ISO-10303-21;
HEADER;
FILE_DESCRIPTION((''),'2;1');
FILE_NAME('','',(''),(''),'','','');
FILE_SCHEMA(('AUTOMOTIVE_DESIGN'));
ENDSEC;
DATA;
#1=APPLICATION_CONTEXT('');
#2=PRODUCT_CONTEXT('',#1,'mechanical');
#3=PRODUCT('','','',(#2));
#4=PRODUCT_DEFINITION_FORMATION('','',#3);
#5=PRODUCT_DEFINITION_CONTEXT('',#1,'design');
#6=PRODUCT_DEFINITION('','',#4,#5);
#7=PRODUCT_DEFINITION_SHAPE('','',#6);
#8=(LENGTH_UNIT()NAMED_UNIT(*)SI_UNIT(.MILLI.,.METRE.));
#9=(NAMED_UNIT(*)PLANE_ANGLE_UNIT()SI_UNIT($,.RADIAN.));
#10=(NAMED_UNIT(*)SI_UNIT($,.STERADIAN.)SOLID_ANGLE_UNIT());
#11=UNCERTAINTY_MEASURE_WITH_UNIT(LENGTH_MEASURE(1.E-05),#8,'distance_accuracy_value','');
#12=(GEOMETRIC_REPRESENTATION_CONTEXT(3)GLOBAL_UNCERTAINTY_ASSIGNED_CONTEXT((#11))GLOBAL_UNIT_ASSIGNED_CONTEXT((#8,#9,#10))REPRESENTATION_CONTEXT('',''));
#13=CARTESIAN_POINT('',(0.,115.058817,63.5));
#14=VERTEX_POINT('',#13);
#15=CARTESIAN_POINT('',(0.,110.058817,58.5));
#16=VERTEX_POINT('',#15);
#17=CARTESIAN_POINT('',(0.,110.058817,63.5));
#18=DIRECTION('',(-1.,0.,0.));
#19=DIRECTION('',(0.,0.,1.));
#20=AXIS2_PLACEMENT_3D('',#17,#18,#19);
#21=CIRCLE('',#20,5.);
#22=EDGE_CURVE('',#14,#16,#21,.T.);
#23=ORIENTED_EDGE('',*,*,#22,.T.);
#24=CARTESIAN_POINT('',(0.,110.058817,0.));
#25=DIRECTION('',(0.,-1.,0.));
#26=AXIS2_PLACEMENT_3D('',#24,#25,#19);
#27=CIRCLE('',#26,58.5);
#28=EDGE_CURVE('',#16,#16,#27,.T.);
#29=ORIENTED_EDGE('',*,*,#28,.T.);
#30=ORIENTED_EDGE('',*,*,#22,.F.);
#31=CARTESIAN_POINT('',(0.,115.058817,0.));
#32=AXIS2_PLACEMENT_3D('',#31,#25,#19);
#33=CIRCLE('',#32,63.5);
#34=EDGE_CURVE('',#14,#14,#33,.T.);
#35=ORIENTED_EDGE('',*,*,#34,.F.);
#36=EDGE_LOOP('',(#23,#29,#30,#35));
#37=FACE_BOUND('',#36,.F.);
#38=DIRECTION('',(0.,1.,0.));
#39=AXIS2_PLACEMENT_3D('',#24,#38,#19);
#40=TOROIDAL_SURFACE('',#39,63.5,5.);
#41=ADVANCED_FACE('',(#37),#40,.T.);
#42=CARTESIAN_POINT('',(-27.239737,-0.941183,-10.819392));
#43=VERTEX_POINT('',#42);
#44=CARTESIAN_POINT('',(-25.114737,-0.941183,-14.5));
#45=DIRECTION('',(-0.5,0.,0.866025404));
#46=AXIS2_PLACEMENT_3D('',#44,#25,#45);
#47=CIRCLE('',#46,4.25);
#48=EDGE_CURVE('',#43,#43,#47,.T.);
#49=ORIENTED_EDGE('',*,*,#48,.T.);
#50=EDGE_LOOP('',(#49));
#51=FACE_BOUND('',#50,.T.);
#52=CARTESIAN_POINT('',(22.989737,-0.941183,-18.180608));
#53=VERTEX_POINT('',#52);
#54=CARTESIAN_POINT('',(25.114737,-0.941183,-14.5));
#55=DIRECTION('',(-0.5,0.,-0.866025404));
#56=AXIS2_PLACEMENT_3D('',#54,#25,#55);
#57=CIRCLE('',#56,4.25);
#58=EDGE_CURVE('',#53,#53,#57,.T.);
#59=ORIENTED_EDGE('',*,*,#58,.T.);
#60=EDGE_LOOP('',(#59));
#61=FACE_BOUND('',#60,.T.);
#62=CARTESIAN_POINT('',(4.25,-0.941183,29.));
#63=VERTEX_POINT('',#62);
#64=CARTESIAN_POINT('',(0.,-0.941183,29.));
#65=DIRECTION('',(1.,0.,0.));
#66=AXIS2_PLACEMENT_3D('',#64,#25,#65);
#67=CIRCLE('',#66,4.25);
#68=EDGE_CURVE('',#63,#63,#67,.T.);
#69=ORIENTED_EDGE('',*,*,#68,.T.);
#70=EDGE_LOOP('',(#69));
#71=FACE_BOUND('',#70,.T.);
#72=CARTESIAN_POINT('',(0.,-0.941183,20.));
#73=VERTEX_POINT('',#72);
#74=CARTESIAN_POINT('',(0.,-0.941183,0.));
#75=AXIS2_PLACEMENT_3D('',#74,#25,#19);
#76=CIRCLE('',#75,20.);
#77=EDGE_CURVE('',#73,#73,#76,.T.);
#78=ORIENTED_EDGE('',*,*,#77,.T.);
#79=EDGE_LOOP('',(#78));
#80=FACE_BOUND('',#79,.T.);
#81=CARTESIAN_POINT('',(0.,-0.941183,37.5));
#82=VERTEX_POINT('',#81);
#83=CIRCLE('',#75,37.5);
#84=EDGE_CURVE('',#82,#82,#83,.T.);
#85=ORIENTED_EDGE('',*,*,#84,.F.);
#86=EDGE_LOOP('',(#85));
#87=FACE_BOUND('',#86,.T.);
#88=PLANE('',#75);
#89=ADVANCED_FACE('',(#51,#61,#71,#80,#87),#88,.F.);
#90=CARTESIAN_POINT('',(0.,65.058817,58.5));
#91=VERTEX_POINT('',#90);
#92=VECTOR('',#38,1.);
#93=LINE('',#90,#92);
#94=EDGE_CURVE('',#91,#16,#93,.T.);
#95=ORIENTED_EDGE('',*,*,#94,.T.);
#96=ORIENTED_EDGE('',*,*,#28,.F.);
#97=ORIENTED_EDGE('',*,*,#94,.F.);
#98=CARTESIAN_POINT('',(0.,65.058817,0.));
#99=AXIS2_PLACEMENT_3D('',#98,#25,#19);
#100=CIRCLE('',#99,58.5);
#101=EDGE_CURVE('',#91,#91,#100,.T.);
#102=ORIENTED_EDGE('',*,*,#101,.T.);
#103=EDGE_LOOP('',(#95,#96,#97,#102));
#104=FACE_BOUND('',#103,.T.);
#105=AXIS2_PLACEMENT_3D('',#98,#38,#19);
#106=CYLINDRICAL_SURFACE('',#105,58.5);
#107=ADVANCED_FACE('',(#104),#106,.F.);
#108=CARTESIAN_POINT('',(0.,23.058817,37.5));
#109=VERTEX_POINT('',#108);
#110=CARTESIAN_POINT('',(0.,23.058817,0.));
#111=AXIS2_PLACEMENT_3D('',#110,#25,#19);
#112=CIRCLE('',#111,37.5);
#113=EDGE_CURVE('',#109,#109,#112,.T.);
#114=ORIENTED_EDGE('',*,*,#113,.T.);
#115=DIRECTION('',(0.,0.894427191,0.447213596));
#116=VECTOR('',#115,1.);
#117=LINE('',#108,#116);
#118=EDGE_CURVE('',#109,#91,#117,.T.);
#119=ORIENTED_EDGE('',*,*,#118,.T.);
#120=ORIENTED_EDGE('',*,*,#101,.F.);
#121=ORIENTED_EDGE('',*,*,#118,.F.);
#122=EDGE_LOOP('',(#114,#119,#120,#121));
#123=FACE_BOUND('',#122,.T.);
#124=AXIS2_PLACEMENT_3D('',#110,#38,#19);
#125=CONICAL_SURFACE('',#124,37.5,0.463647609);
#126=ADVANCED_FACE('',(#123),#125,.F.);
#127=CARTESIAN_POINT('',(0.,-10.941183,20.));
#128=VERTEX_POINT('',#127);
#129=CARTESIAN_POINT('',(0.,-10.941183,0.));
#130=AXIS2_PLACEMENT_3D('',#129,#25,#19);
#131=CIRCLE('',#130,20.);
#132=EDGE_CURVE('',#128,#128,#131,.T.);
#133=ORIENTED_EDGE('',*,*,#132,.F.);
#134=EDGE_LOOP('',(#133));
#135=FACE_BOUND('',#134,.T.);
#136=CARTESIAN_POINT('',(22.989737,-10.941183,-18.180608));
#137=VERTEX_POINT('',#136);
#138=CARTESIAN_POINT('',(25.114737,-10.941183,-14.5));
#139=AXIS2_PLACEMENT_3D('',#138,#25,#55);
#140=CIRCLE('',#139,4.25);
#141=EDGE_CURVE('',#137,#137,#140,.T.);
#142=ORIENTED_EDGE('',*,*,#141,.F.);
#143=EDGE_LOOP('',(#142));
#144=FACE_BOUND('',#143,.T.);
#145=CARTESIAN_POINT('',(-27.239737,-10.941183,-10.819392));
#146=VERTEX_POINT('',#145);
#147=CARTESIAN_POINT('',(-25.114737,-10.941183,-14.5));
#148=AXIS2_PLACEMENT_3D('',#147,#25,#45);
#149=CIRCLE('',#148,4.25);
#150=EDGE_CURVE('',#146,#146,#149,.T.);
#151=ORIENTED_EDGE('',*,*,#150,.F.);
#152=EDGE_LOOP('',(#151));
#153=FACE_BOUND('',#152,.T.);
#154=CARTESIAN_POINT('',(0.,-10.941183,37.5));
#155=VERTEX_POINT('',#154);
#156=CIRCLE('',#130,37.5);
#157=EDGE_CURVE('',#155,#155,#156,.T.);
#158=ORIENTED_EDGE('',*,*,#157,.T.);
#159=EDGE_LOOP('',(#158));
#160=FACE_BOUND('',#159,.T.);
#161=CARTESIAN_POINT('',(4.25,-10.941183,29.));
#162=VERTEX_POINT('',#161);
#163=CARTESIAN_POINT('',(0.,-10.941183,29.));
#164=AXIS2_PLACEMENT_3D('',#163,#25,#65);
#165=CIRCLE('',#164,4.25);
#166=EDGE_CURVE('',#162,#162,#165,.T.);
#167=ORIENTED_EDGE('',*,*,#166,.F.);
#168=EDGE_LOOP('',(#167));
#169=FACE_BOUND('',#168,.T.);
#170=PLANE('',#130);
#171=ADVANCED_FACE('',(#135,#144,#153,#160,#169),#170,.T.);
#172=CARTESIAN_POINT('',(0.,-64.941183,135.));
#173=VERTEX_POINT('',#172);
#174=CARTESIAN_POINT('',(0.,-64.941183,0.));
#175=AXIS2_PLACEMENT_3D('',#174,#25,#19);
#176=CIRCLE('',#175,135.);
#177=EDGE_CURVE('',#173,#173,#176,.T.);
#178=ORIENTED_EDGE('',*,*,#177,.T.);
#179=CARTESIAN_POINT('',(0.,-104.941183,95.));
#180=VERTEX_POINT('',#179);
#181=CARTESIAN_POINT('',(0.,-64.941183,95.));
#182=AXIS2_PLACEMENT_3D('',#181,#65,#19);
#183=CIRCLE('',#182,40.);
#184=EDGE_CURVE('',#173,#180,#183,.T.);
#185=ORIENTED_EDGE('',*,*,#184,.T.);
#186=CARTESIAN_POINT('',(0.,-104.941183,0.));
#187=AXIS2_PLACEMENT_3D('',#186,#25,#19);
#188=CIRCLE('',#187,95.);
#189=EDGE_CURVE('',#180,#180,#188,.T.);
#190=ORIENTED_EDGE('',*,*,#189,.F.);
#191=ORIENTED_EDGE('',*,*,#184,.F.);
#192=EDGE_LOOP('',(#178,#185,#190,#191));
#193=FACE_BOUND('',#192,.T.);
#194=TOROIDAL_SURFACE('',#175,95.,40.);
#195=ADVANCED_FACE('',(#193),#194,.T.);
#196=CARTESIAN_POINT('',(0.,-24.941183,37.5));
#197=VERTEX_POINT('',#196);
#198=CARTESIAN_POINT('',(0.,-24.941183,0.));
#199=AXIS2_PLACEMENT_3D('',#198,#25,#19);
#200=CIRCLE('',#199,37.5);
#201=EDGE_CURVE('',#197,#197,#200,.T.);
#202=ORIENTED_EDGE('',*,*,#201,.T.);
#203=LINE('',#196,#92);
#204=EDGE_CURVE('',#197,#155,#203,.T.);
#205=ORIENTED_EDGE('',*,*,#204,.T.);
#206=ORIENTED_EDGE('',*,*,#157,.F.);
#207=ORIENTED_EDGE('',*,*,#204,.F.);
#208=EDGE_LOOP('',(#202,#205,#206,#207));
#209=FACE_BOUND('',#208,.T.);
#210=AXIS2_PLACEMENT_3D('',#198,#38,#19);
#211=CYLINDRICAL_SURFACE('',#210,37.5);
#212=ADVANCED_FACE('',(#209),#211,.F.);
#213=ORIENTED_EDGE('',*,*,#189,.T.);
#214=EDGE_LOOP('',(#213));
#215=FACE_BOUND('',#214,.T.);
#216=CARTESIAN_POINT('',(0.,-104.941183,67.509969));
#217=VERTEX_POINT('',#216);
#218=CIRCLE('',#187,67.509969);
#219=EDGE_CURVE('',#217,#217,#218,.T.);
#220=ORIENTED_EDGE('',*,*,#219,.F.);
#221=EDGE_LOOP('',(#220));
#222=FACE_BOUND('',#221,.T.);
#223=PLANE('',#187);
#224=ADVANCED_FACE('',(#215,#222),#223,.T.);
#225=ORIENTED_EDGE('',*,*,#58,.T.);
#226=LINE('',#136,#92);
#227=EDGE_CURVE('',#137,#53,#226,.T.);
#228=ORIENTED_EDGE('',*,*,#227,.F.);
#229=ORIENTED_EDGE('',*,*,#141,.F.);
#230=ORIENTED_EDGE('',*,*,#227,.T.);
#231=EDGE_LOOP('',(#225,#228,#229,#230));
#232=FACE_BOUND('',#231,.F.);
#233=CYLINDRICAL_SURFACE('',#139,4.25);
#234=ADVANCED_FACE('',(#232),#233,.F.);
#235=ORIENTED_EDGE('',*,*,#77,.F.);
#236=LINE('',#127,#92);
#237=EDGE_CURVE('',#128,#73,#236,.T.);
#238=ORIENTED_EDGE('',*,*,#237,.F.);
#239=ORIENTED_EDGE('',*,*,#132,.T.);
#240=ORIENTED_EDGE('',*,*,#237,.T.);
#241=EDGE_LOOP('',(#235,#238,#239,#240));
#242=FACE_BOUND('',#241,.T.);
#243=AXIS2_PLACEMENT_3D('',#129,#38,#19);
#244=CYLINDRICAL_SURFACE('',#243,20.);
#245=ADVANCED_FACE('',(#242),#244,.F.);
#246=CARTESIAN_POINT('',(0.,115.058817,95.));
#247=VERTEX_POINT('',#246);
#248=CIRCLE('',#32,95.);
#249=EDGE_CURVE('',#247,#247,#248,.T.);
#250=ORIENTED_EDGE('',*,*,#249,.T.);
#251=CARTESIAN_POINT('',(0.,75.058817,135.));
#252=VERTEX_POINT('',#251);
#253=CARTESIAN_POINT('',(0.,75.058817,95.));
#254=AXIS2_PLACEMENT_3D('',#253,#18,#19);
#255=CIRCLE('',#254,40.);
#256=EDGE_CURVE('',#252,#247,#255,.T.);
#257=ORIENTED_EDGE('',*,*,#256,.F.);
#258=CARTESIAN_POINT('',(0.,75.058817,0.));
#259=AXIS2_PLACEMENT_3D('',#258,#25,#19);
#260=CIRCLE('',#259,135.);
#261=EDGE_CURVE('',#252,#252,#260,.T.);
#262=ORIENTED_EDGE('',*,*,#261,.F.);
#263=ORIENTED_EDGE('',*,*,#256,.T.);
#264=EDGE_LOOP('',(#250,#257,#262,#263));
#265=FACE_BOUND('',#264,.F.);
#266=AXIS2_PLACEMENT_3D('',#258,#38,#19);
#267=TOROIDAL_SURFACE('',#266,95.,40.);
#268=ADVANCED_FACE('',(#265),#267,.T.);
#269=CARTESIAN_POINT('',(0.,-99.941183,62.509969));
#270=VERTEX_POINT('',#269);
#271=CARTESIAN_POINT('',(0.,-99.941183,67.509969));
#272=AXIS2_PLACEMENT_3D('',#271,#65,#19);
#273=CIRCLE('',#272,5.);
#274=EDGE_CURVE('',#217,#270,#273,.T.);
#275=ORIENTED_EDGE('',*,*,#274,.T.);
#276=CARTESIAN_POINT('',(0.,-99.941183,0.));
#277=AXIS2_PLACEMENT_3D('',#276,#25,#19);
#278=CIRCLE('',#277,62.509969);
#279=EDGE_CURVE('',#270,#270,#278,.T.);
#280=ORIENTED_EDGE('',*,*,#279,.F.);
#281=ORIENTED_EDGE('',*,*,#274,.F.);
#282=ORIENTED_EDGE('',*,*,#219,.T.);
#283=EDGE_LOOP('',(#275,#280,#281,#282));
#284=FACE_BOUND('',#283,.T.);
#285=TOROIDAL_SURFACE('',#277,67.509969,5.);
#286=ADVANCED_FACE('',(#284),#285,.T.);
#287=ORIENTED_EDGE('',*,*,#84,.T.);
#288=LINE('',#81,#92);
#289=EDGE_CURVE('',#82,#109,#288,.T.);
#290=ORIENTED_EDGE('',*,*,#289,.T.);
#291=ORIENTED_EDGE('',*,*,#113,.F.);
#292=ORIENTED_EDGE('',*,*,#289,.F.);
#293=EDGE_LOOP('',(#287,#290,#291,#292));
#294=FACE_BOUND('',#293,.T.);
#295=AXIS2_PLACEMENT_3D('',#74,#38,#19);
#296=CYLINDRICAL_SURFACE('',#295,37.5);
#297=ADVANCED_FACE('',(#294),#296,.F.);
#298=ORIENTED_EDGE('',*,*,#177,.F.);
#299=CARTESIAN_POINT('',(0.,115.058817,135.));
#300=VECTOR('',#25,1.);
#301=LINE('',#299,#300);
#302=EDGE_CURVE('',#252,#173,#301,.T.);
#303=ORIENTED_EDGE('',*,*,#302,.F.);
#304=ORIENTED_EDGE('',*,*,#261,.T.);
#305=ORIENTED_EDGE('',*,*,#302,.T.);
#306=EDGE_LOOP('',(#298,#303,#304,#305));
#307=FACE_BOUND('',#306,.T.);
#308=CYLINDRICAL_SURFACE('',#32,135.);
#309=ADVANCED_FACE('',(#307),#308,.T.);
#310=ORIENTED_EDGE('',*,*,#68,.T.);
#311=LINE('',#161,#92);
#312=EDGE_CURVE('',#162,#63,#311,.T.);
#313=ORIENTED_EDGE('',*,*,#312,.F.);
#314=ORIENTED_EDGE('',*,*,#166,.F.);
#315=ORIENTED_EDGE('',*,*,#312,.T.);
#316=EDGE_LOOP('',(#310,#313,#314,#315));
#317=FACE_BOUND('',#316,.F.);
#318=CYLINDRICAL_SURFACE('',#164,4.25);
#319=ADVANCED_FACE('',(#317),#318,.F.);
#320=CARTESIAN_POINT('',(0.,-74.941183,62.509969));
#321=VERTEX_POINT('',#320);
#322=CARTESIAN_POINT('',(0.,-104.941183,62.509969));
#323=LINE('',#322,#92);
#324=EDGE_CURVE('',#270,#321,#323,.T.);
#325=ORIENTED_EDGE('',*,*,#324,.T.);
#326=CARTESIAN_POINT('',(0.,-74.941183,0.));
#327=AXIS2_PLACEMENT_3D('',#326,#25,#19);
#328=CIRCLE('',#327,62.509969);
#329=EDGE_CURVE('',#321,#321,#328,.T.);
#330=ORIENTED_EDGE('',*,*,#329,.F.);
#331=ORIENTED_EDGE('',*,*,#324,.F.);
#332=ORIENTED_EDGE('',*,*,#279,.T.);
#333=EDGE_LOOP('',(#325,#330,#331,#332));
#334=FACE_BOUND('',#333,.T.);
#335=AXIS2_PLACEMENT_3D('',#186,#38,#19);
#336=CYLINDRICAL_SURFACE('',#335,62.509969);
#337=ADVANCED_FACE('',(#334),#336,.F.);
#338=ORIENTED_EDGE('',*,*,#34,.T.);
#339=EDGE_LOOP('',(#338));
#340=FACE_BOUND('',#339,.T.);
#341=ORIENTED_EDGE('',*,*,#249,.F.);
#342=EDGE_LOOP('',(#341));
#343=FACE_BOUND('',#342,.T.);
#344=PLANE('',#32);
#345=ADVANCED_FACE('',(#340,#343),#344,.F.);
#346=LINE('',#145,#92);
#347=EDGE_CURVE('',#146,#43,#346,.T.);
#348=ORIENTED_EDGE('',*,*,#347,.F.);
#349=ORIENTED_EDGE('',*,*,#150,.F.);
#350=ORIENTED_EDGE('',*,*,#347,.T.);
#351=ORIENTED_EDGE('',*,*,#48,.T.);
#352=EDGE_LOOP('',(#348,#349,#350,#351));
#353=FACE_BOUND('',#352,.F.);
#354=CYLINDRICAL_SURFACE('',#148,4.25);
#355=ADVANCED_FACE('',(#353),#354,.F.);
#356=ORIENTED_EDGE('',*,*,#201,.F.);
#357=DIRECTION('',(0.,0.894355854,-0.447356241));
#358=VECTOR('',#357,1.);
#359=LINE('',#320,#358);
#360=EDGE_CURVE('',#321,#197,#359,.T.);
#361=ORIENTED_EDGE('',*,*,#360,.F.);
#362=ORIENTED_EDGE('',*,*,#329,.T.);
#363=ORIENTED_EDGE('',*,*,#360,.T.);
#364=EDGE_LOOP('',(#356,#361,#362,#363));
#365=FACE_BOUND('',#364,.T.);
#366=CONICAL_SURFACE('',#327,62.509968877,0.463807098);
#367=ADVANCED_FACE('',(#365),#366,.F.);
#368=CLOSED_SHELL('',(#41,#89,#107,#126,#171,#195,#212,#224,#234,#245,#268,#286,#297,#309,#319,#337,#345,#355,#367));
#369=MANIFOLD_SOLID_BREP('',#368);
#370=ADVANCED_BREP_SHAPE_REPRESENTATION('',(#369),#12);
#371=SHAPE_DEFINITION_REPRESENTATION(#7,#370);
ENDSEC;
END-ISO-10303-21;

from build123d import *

# Parameters (mm, degrees)
F2_R     = 40
F3_R     = 5
F4_R     = 5
F5_R     = 4.25
F6_DEPTH = 10
F7_COUNT = 3


# Not quite as in the source:
# - a feature names something its author has since deleted; it is built from what else it names


with BuildPart() as f1:
    # F0 (on Right) → F1 (revolve)
    with BuildSketch(Plane.YZ):
        Polygon((115.0588170719, 135), (-104.9411829281, 135), (-104.9411829281, 62.5099688768), (-74.9411829281, 62.5099688768), (-24.9411829281, 37.5), (-10.9411829281, 37.5), (-10.9411829281, 20), (-0.9411829281, 20), (-0.9411829281, 37.5), (23.0588170719, 37.5), (65.0588170719, 58.5), (115.0588170719, 58.5), align=None)
    revolve(axis=Axis((0, 3.7167160804, 0), (0, -1, 0)))

    # F2
    f2_edges = [f1.edges().sort_by_distance(p)[0] for p in [
        (0, -104.941183, -135),
        (0, 115.058817, -135),
    ]]
    fillet(f2_edges, radius=F2_R)

    # F3
    f3_edges = [f1.edges().sort_by_distance(p)[0] for p in [
        (0, -104.941183, -62.509969),
    ]]
    fillet(f3_edges, radius=F3_R)

    # F4
    f4_edges = [f1.edges().sort_by_distance(p)[0] for p in [
        (0, 115.058817, -58.5),
    ]]
    fillet(f4_edges, radius=F4_R)

    # F5 (on face) → F6 (cut, through all)
    with BuildSketch(Plane.XZ.offset(10.9411829281)):
        with Locations((0, 29)):
            Circle(F5_R)
    f6 = extrude(amount=-F6_DEPTH, mode=Mode.SUBTRACT)

    # F7: F6 ×3 about axis
    f7_axis = Axis((0, 3.7167160804, 0), (0, -1, 0))
    for i in range(1, F7_COUNT):
        add(f6.rotate(f7_axis, i * 360 / F7_COUNT), mode=Mode.SUBTRACT)


solid = f1.part
